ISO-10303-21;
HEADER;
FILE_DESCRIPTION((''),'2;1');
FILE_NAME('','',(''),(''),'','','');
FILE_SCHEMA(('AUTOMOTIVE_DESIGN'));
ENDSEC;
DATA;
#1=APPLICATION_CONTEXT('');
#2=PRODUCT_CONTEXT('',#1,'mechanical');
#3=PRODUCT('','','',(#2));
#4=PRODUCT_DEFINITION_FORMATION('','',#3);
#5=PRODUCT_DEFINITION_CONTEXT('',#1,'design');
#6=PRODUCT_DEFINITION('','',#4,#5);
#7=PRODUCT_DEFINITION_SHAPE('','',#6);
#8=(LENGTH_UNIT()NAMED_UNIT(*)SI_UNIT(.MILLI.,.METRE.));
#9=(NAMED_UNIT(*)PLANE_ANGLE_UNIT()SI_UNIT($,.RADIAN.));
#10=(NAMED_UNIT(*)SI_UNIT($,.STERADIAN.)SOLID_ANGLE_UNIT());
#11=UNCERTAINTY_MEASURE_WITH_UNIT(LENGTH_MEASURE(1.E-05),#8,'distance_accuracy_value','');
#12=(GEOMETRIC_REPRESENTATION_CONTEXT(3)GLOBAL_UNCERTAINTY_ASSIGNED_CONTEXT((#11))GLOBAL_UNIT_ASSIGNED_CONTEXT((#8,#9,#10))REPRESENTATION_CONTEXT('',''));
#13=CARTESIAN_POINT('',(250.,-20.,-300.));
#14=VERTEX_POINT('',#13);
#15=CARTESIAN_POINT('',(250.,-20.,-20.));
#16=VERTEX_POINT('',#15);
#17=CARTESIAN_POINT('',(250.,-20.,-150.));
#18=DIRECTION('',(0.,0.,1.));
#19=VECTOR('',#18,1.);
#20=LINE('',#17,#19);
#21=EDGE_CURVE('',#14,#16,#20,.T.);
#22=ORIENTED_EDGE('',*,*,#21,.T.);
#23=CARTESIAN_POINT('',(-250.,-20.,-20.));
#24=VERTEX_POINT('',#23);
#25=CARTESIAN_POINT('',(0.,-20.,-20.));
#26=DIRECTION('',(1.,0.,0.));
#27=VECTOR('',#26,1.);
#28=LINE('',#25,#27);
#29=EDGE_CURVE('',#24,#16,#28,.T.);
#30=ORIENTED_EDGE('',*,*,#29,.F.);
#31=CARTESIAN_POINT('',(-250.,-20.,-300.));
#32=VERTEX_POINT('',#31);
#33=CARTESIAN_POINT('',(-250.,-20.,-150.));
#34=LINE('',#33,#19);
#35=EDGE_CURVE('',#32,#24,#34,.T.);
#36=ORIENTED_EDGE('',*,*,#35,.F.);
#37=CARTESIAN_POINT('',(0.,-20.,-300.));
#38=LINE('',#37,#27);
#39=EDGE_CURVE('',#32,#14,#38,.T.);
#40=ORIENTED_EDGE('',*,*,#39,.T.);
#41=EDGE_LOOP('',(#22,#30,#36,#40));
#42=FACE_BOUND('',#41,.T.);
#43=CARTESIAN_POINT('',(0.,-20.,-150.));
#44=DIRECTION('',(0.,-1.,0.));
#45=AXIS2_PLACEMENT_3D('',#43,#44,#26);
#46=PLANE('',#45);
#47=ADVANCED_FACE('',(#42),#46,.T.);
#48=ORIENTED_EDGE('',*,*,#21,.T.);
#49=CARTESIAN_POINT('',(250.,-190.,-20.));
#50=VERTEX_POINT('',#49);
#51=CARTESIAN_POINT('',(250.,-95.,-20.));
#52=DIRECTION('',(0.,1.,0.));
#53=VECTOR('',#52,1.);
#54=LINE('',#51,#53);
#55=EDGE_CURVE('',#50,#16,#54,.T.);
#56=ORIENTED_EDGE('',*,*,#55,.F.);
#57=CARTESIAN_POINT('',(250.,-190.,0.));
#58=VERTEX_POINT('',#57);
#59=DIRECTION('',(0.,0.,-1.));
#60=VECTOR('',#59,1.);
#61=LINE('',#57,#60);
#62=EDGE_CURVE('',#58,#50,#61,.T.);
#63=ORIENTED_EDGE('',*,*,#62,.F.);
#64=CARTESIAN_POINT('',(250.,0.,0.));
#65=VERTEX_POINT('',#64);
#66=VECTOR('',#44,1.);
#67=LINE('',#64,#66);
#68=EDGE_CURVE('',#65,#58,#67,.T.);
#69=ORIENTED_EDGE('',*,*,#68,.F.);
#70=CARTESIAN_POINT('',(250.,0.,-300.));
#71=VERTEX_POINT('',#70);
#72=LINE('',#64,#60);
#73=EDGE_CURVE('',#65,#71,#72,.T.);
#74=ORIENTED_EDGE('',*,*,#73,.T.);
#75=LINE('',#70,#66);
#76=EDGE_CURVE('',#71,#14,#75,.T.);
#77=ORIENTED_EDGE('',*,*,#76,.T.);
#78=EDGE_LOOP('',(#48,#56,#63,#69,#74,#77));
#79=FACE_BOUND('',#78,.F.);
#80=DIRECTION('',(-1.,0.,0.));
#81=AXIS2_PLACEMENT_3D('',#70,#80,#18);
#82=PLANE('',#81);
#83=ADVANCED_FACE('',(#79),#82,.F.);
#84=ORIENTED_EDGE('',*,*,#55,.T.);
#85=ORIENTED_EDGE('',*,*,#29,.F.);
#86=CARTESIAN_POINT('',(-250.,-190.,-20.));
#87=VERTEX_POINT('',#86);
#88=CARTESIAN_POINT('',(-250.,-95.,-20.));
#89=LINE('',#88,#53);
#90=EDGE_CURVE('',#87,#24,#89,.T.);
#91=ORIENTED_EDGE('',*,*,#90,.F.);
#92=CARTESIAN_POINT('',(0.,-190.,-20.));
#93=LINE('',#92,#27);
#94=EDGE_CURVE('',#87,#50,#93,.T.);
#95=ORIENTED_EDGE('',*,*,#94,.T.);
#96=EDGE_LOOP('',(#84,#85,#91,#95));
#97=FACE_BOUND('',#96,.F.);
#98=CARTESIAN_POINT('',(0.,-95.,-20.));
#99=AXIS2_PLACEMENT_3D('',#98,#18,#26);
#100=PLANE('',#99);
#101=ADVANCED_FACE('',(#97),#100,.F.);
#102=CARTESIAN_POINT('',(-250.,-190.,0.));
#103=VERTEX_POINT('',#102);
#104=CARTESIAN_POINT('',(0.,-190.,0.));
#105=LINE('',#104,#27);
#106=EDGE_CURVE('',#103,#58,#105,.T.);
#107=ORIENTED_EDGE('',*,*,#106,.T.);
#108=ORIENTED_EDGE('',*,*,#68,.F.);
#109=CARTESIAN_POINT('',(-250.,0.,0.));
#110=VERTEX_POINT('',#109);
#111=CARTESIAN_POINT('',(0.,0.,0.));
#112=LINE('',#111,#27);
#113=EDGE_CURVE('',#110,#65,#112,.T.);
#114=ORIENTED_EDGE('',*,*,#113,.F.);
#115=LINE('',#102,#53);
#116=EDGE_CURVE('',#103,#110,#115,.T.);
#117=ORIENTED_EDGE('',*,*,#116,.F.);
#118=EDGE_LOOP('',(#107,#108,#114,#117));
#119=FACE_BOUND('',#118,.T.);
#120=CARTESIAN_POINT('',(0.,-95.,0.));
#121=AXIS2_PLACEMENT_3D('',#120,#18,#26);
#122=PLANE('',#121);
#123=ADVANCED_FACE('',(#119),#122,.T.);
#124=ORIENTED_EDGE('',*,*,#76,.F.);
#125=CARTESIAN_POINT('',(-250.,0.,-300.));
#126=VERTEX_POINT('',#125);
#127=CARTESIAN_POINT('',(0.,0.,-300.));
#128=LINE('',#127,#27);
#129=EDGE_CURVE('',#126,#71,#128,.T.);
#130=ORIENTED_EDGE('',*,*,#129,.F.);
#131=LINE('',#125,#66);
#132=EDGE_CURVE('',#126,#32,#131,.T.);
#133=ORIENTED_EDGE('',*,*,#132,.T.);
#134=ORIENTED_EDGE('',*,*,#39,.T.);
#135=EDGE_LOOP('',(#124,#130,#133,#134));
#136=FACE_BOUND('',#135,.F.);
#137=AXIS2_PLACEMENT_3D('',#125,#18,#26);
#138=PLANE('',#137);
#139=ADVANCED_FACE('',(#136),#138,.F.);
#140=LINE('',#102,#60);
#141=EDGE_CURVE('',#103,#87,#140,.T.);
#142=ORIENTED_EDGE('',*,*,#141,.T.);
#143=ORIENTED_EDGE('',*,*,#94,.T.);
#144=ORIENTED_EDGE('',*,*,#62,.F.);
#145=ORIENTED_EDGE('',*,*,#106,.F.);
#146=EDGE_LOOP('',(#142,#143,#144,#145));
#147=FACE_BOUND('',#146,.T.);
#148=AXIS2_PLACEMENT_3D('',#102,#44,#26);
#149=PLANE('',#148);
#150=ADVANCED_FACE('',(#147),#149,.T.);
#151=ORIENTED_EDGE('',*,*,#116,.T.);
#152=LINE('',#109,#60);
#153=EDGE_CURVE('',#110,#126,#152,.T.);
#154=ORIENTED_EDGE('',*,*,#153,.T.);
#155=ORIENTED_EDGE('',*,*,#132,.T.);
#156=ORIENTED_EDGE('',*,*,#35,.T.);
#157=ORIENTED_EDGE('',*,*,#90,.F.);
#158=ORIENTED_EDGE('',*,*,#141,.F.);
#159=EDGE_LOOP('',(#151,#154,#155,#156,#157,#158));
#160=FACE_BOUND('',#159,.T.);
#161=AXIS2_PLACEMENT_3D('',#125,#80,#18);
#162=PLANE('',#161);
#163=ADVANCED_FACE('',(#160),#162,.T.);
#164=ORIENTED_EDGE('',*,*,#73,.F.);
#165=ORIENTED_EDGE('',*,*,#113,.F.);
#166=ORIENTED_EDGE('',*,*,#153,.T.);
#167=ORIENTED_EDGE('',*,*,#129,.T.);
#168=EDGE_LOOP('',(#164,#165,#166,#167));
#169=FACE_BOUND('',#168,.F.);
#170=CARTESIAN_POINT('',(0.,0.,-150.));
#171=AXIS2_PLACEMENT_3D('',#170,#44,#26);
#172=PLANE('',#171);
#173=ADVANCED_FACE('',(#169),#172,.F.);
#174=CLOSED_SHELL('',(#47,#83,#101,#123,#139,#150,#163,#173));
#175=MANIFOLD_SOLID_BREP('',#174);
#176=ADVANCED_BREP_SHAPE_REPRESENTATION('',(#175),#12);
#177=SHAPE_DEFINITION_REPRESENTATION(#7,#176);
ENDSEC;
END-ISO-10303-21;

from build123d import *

# Parameters (mm, degrees)
F0_W     = 500
F0_H     = 190
F1_DEPTH = 20
F2_W     = 500
F2_H     = 300
F3_DEPTH = 20


# Not quite as in the source:
# - the program builds the solid bodies; features that only make, move or delete a surface that nothing else refers to are left out


with BuildPart() as f1:
    # F0 (on Top) → F1 (new body)
    with BuildSketch(Plane.XY):
        with Locations((0, -95)):
            Rectangle(F0_W, F0_H)
    extrude(amount=-F1_DEPTH)

    # F2 (on Front) → F3 (join)
    with BuildSketch(Plane.XZ):
        with Locations((0, -150)):
            Rectangle(F2_W, F2_H)
    extrude(amount=F3_DEPTH)


solid = f1.part
